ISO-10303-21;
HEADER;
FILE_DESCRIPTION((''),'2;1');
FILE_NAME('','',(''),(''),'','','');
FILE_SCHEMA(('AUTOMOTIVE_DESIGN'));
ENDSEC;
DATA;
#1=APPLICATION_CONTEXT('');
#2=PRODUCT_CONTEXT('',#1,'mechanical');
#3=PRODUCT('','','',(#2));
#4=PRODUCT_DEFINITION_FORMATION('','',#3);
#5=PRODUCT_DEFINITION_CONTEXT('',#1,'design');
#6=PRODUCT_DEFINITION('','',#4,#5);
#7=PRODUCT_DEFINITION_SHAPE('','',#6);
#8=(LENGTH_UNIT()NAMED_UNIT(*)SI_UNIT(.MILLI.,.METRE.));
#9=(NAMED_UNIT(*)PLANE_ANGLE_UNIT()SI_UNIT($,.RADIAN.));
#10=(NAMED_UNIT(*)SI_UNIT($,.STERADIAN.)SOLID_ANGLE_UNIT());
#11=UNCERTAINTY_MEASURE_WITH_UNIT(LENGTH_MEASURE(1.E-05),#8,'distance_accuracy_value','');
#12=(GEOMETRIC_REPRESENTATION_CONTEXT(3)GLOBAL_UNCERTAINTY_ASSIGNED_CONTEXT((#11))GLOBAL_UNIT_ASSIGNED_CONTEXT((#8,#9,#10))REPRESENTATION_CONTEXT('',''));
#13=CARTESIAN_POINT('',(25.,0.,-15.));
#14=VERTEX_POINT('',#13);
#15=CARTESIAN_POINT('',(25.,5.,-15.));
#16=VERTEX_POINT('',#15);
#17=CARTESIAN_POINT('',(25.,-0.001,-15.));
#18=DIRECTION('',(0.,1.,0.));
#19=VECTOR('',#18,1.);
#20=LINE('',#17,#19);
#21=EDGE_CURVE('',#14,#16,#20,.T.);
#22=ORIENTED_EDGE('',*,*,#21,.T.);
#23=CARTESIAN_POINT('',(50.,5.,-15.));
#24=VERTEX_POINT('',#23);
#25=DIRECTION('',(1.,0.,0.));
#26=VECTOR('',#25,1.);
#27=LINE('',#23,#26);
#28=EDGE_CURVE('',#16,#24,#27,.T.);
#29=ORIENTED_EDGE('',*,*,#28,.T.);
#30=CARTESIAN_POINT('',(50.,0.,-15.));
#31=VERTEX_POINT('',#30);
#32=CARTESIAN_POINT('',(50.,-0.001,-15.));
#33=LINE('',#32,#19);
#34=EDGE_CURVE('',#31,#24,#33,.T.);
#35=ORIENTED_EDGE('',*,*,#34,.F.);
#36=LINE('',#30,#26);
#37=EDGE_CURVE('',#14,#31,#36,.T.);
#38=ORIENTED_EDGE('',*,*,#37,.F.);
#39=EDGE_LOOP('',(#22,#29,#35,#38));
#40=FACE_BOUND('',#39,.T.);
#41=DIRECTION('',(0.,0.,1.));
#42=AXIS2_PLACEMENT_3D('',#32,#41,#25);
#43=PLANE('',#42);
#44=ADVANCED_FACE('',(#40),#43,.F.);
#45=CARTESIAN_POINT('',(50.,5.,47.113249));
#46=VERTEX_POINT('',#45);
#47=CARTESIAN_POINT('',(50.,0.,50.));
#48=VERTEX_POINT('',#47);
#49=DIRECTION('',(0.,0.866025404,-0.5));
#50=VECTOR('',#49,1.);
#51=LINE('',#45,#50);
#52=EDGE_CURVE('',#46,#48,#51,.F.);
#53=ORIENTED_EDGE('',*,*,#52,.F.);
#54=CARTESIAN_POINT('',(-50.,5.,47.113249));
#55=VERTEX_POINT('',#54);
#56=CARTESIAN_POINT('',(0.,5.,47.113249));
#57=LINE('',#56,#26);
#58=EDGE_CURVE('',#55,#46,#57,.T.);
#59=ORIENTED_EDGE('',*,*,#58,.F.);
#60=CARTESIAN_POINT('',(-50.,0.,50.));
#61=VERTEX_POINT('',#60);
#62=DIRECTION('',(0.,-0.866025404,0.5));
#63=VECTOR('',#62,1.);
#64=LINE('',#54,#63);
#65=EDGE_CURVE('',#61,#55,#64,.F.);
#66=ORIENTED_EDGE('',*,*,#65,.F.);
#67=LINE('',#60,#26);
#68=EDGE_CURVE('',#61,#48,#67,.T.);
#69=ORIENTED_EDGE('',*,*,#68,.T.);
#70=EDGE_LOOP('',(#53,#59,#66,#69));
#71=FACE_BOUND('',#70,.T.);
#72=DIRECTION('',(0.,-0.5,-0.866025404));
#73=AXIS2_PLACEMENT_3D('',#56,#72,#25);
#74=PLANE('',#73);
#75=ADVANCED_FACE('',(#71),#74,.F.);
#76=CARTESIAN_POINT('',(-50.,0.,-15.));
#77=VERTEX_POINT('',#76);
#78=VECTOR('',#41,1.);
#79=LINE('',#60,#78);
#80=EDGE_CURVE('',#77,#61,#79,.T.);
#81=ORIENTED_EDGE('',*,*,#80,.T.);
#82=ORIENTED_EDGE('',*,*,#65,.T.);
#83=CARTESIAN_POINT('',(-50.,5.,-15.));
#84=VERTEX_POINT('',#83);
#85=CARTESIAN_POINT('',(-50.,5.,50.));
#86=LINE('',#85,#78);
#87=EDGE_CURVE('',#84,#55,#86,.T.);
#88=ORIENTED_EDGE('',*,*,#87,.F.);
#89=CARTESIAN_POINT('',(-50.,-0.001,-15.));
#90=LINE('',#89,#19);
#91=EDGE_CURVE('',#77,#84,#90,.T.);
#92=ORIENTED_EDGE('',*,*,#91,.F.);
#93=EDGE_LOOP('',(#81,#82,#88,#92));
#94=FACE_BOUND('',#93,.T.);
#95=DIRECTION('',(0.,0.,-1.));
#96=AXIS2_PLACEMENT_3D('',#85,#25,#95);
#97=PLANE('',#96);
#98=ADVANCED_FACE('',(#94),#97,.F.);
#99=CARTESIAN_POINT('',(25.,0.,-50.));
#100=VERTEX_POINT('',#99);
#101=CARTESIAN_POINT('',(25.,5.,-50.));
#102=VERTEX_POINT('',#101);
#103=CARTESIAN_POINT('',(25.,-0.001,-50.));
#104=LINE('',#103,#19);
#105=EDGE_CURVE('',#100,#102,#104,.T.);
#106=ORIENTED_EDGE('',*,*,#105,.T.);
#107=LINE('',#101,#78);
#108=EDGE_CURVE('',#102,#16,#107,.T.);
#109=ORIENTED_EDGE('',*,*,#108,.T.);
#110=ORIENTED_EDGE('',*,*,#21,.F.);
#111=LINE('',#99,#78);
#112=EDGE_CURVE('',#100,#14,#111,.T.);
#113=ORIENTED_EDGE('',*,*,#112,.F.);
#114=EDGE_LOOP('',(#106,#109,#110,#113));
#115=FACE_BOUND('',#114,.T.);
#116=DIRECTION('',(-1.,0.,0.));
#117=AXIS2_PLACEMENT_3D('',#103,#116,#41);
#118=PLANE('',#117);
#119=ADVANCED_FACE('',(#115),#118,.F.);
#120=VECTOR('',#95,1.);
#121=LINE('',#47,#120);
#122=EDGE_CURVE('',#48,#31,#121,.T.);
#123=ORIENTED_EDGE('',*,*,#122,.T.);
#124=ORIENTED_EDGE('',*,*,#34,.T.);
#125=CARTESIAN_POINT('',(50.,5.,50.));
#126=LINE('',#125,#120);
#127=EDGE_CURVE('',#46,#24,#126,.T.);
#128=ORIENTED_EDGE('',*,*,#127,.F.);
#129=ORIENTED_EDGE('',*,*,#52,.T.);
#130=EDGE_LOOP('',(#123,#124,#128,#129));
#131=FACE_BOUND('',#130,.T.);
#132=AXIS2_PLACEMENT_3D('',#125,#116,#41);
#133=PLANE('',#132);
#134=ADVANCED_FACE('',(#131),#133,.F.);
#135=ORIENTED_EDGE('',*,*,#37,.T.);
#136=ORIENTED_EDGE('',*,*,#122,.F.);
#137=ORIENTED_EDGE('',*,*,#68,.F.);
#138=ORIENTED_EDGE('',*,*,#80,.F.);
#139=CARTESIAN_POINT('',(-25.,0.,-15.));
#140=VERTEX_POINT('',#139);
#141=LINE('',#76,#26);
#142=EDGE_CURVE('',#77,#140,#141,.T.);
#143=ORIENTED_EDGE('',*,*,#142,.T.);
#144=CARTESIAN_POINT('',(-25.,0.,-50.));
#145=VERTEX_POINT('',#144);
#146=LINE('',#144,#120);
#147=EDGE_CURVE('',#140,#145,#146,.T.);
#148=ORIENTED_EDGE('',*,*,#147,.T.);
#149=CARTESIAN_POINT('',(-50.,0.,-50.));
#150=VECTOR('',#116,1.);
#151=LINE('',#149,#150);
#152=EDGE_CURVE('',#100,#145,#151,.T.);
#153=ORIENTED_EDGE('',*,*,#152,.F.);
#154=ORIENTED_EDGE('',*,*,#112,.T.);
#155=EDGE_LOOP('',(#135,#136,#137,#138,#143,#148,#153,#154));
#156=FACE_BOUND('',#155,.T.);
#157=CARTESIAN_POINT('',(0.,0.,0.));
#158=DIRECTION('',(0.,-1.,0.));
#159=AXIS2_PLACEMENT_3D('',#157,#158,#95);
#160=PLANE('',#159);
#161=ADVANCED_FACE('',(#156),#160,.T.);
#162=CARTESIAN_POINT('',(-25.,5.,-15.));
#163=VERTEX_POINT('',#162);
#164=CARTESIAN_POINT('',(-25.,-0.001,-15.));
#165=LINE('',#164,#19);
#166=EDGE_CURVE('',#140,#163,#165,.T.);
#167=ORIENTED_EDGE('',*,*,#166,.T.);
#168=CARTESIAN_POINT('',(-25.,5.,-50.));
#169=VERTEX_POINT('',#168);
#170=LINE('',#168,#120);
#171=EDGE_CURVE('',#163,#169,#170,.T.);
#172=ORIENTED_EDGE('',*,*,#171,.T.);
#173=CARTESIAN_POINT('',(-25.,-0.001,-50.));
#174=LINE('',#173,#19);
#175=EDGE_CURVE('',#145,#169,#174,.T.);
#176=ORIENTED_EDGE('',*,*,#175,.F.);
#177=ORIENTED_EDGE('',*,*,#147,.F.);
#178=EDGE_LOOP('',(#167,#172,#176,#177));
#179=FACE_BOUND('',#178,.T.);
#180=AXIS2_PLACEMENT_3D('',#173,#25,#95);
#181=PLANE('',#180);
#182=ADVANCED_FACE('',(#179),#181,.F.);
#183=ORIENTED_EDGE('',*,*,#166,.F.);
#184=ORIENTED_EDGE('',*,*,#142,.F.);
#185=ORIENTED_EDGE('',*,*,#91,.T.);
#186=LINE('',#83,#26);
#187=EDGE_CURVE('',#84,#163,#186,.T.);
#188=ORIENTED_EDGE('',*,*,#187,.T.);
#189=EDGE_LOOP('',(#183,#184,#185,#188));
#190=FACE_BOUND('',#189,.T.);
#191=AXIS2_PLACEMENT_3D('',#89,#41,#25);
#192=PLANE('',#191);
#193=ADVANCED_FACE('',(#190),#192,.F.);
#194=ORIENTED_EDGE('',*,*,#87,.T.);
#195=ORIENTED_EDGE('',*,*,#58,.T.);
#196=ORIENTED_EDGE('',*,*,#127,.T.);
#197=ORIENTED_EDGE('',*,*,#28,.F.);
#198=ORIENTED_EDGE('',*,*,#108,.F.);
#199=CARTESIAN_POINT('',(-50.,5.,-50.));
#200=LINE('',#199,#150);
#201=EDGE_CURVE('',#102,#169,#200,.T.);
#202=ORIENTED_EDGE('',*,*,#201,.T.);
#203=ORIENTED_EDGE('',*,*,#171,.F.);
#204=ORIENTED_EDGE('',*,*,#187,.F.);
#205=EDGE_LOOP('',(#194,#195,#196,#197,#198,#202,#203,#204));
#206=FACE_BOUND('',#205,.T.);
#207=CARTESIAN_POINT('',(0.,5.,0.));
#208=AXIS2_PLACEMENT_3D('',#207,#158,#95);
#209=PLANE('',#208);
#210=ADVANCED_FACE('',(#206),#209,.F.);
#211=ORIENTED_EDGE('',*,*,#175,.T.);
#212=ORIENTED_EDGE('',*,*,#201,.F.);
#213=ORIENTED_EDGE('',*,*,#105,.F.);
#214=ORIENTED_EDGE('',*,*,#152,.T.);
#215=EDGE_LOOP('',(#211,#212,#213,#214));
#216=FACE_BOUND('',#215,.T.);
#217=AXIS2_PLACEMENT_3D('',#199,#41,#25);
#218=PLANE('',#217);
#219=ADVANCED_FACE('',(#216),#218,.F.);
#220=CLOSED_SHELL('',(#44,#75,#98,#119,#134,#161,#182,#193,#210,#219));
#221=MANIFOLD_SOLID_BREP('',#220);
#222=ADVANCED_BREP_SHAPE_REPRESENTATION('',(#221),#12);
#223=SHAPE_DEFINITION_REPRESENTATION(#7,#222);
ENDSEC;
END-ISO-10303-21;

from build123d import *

# Parameters (mm, degrees)
CROQUIS1_W              = 100
CROQUIS1_H              = 100
SALIENTE_EXTRUIR1_DEPTH = 5
CHAFL_N1_SIZE2          = 2.886751346
CHAFL_N1_SIZE           = 5
CORTAR_EXTRUIR1_REACH   = 72.887
CROQUIS2_W              = 25
CROQUIS2_H              = 35


with BuildPart() as part:
    # Croquis1 → Saliente-Extruir1 (new body)
    with BuildSketch(Plane(origin=(0, 0, 0), x_dir=(1, 0, 0), z_dir=(0, 1, 0))):
        Rectangle(CROQUIS1_W, CROQUIS1_H)
    extrude(amount=SALIENTE_EXTRUIR1_DEPTH)

    # Chaflán1
    chafl_n1_edges = [part.edges().sort_by_distance(p)[0] for p in [
        (0, 5, 50),
    ]]
    chafl_n1_side = [part.faces().sort_by_distance(p)[0] for p in [
        (0, 4.942264973, 50),
    ]]
    chamfer(chafl_n1_edges, length=CHAFL_N1_SIZE - 0.0001, length2=CHAFL_N1_SIZE2 - 0.0001, reference=chafl_n1_side[0])  # a hair under: the kernel refuses the full size

    # Croquis2 → Cortar-Extruir1 (cut, up to next)
    with BuildSketch(Plane(origin=(0, 5, 0), x_dir=(1, 0, 0), z_dir=(0, 1, 0)), mode=Mode.PRIVATE) as cortar_extruir1_sk1:
        with Locations((-37.5, 32.5)):
            Rectangle(CROQUIS2_W, CROQUIS2_H)
    cortar_extruir1_tool1 = extrude(cortar_extruir1_sk1.sketch, amount=-CORTAR_EXTRUIR1_REACH, mode=Mode.PRIVATE) & part.part
    # Croquis2 → Cortar-Extruir1 (cut, up to next)
    with BuildSketch(Plane(origin=(0, 5, 0), x_dir=(1, 0, 0), z_dir=(0, 1, 0)), mode=Mode.PRIVATE) as cortar_extruir1_sk2:
        with Locations((37.5, 32.5)):
            Rectangle(CROQUIS2_W, CROQUIS2_H)
    cortar_extruir1_tool2 = extrude(cortar_extruir1_sk2.sketch, amount=-CORTAR_EXTRUIR1_REACH, mode=Mode.PRIVATE) & part.part
    add(cortar_extruir1_tool1.solids().sort_by_distance((-37.5, 5, -32.5))[0], mode=Mode.SUBTRACT)
    add(cortar_extruir1_tool2.solids().sort_by_distance((37.5, 5, -32.5))[0], mode=Mode.SUBTRACT)


solid = part.part
